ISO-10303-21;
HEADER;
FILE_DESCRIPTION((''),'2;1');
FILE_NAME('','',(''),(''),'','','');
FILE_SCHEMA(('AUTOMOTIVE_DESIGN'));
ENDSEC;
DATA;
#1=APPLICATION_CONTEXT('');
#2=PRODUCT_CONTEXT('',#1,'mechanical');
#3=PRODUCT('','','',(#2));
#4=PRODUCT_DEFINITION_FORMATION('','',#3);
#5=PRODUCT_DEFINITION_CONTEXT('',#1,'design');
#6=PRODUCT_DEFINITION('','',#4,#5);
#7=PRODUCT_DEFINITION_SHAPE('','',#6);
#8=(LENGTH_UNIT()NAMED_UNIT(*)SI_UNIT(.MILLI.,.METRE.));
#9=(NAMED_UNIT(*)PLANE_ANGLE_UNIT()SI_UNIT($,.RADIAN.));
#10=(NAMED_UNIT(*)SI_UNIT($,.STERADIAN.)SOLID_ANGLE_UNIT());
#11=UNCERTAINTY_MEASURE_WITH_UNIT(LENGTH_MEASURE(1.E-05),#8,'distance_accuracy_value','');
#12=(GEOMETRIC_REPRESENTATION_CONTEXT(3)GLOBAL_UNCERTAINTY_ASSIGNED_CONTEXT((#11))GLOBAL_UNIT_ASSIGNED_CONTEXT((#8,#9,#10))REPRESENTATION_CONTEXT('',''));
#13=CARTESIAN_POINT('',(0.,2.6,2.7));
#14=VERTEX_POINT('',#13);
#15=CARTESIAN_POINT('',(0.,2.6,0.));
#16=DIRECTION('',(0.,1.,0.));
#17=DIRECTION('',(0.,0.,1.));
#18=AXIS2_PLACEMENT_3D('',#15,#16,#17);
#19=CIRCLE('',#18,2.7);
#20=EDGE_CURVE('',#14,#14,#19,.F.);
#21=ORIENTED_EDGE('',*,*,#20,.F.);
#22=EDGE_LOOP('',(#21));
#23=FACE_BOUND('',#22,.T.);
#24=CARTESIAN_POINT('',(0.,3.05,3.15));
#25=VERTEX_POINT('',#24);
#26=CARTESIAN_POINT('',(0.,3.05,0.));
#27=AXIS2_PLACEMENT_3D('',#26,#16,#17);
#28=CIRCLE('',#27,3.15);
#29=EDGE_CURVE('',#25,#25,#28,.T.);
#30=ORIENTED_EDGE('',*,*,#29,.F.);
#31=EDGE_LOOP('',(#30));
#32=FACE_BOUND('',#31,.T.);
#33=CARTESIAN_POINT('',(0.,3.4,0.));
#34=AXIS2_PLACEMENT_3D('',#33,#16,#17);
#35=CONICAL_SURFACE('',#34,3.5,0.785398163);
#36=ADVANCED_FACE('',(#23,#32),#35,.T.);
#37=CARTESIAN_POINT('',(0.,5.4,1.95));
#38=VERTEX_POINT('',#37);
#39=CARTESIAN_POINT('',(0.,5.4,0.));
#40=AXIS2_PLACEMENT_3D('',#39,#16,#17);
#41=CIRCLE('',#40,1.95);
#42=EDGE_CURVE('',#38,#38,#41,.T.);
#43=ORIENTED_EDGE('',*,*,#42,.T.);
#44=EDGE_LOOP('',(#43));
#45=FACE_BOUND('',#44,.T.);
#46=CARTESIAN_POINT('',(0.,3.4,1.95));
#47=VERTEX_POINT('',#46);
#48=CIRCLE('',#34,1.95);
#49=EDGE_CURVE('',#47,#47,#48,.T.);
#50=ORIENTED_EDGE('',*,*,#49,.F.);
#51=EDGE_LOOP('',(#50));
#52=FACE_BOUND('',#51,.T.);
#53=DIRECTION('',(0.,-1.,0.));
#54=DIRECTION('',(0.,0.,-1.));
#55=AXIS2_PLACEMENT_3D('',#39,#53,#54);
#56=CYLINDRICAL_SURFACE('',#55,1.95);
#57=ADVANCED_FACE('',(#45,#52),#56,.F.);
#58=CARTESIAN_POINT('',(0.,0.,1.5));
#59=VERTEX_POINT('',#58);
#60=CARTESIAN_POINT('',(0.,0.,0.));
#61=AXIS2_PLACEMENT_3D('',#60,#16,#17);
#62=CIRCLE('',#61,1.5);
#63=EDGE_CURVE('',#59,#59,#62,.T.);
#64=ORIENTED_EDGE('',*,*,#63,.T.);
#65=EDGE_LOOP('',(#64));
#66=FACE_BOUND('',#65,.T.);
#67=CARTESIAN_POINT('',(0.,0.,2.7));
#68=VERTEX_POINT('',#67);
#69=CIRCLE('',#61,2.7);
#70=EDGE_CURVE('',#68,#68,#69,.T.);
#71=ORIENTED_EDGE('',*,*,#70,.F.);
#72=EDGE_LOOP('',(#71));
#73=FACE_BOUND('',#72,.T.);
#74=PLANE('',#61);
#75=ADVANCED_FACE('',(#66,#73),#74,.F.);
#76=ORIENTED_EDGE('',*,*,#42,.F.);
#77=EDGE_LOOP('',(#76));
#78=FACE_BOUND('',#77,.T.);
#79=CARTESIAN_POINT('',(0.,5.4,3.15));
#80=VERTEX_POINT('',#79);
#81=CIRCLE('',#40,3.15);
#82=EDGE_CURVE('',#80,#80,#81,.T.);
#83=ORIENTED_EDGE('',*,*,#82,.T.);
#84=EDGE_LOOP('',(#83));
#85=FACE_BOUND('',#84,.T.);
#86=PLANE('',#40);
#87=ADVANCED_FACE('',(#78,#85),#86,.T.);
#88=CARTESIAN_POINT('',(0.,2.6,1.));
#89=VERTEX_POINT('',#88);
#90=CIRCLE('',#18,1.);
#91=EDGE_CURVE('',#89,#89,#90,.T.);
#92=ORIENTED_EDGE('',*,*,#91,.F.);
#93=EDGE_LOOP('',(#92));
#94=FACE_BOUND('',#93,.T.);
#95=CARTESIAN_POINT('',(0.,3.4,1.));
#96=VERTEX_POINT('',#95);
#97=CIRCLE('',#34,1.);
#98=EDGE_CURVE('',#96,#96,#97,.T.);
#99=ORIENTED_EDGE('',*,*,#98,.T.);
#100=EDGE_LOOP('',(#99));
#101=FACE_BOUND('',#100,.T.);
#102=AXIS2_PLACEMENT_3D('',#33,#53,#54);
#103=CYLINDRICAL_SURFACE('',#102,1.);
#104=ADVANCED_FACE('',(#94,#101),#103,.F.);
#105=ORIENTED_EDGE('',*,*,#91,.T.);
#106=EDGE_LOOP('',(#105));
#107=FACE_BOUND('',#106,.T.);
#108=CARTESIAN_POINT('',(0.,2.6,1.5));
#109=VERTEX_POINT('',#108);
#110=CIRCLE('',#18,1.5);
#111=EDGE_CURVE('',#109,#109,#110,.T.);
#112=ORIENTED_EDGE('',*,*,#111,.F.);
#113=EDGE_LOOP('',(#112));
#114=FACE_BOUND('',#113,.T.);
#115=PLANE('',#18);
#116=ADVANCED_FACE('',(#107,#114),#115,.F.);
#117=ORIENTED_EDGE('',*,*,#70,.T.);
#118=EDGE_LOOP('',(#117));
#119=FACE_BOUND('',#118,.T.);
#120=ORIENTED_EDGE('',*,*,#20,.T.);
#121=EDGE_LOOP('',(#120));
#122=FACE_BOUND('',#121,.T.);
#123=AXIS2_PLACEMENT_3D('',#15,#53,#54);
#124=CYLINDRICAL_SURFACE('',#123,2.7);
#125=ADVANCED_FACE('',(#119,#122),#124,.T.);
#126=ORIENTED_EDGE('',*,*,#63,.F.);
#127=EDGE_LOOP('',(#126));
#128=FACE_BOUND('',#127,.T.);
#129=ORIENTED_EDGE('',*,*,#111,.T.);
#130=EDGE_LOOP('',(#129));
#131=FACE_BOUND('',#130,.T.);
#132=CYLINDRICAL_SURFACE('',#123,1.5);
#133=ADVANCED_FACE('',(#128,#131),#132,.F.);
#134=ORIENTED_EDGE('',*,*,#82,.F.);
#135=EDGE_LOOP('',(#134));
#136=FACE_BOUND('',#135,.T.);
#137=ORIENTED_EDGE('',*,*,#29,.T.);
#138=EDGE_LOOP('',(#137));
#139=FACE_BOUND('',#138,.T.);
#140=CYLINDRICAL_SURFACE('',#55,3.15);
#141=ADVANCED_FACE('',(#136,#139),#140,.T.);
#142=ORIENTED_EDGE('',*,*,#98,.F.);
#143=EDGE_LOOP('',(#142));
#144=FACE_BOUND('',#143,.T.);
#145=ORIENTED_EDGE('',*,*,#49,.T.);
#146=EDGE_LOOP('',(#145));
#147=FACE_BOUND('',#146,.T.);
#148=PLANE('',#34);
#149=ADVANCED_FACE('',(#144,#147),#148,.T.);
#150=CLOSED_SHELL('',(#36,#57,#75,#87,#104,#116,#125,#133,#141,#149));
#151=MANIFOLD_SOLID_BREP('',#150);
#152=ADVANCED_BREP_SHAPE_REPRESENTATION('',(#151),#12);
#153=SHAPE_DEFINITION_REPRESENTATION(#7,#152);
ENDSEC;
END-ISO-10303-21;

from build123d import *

# Parameters (mm, degrees)
SKETCH_1_R      = 2.7
SKETCH_1_R_2    = 1.5
EXTRUDE_1_DEPTH = 2.6
SKETCH_2_R      = 2.7
SKETCH_2_R_2    = 1
EXTRUDE_2_DEPTH = 0.8
SKETCH_3_R      = 3.15
SKETCH_3_R_2    = 1.95
EXTRUDE_3_DEPTH = 2
CHAMFER_1_SIZE  = 0.8


with BuildPart() as part:
    # Эскиз1 → Бобышка-Вытянуть1 (new body)
    with BuildSketch(Plane(origin=(0, 0, 0), x_dir=(1, 0, 0), z_dir=(0, 1, 0))):
        with Locations(Location((0, 0, 0), (0, 0, 270))):
            Circle(SKETCH_1_R)
        with Locations(Location((0, 0, 0), (0, 0, 270))):
            Circle(SKETCH_1_R_2, mode=Mode.SUBTRACT)
    extrude(amount=EXTRUDE_1_DEPTH)

    # Эскиз2 → Бобышка-Вытянуть2 (add)
    with BuildSketch(Plane(origin=(0, 2.6, 0), x_dir=(1, 0, 0), z_dir=(0, 1, 0))):
        with Locations(Location((0, 0, 0), (0, 0, 270))):
            Circle(SKETCH_2_R)
        with Locations(Location((0, 0, 0), (0, 0, 270))):
            Circle(SKETCH_2_R_2, mode=Mode.SUBTRACT)
    extrude(amount=EXTRUDE_2_DEPTH)

    # Эскиз3 → Бобышка-Вытянуть3 (add)
    with BuildSketch(Plane(origin=(0, 3.4, 0), x_dir=(1, 0, 0), z_dir=(0, 1, 0))):
        with Locations(Location((0, 0, 0), (0, 0, 270))):
            Circle(SKETCH_3_R)
        with Locations(Location((0, 0, 0), (0, 0, 270))):
            Circle(SKETCH_3_R_2, mode=Mode.SUBTRACT)
    extrude(amount=EXTRUDE_3_DEPTH)

    # Фаска1
    # the kernel refuses this chamfer: 0.8 mm, written as the material it adds along each edge
    with BuildSketch(Plane(origin=(0, 3.4, 0), x_dir=(0, 0, 1), z_dir=(-1, 0, 0))) as chamfer_1_piece_1_section:
        Polygon((2.7, -CHAMFER_1_SIZE), (2.7 + CHAMFER_1_SIZE, 0), (2.7, 0), align=None)
    chamfer_1_piece_1 = revolve(axis=Axis((0, 3.4, 0), (0, 1, 0)), mode=Mode.PRIVATE)
    chamfer_1_piece_1 = chamfer_1_piece_1 & Plane(origin=(0, 2.825856837, 0), x_dir=(0, 0, 1), z_dir=(0, -1, 0)) * Cylinder(3.15, 14, mode=Mode.PRIVATE)
    add(chamfer_1_piece_1)


solid = part.part
